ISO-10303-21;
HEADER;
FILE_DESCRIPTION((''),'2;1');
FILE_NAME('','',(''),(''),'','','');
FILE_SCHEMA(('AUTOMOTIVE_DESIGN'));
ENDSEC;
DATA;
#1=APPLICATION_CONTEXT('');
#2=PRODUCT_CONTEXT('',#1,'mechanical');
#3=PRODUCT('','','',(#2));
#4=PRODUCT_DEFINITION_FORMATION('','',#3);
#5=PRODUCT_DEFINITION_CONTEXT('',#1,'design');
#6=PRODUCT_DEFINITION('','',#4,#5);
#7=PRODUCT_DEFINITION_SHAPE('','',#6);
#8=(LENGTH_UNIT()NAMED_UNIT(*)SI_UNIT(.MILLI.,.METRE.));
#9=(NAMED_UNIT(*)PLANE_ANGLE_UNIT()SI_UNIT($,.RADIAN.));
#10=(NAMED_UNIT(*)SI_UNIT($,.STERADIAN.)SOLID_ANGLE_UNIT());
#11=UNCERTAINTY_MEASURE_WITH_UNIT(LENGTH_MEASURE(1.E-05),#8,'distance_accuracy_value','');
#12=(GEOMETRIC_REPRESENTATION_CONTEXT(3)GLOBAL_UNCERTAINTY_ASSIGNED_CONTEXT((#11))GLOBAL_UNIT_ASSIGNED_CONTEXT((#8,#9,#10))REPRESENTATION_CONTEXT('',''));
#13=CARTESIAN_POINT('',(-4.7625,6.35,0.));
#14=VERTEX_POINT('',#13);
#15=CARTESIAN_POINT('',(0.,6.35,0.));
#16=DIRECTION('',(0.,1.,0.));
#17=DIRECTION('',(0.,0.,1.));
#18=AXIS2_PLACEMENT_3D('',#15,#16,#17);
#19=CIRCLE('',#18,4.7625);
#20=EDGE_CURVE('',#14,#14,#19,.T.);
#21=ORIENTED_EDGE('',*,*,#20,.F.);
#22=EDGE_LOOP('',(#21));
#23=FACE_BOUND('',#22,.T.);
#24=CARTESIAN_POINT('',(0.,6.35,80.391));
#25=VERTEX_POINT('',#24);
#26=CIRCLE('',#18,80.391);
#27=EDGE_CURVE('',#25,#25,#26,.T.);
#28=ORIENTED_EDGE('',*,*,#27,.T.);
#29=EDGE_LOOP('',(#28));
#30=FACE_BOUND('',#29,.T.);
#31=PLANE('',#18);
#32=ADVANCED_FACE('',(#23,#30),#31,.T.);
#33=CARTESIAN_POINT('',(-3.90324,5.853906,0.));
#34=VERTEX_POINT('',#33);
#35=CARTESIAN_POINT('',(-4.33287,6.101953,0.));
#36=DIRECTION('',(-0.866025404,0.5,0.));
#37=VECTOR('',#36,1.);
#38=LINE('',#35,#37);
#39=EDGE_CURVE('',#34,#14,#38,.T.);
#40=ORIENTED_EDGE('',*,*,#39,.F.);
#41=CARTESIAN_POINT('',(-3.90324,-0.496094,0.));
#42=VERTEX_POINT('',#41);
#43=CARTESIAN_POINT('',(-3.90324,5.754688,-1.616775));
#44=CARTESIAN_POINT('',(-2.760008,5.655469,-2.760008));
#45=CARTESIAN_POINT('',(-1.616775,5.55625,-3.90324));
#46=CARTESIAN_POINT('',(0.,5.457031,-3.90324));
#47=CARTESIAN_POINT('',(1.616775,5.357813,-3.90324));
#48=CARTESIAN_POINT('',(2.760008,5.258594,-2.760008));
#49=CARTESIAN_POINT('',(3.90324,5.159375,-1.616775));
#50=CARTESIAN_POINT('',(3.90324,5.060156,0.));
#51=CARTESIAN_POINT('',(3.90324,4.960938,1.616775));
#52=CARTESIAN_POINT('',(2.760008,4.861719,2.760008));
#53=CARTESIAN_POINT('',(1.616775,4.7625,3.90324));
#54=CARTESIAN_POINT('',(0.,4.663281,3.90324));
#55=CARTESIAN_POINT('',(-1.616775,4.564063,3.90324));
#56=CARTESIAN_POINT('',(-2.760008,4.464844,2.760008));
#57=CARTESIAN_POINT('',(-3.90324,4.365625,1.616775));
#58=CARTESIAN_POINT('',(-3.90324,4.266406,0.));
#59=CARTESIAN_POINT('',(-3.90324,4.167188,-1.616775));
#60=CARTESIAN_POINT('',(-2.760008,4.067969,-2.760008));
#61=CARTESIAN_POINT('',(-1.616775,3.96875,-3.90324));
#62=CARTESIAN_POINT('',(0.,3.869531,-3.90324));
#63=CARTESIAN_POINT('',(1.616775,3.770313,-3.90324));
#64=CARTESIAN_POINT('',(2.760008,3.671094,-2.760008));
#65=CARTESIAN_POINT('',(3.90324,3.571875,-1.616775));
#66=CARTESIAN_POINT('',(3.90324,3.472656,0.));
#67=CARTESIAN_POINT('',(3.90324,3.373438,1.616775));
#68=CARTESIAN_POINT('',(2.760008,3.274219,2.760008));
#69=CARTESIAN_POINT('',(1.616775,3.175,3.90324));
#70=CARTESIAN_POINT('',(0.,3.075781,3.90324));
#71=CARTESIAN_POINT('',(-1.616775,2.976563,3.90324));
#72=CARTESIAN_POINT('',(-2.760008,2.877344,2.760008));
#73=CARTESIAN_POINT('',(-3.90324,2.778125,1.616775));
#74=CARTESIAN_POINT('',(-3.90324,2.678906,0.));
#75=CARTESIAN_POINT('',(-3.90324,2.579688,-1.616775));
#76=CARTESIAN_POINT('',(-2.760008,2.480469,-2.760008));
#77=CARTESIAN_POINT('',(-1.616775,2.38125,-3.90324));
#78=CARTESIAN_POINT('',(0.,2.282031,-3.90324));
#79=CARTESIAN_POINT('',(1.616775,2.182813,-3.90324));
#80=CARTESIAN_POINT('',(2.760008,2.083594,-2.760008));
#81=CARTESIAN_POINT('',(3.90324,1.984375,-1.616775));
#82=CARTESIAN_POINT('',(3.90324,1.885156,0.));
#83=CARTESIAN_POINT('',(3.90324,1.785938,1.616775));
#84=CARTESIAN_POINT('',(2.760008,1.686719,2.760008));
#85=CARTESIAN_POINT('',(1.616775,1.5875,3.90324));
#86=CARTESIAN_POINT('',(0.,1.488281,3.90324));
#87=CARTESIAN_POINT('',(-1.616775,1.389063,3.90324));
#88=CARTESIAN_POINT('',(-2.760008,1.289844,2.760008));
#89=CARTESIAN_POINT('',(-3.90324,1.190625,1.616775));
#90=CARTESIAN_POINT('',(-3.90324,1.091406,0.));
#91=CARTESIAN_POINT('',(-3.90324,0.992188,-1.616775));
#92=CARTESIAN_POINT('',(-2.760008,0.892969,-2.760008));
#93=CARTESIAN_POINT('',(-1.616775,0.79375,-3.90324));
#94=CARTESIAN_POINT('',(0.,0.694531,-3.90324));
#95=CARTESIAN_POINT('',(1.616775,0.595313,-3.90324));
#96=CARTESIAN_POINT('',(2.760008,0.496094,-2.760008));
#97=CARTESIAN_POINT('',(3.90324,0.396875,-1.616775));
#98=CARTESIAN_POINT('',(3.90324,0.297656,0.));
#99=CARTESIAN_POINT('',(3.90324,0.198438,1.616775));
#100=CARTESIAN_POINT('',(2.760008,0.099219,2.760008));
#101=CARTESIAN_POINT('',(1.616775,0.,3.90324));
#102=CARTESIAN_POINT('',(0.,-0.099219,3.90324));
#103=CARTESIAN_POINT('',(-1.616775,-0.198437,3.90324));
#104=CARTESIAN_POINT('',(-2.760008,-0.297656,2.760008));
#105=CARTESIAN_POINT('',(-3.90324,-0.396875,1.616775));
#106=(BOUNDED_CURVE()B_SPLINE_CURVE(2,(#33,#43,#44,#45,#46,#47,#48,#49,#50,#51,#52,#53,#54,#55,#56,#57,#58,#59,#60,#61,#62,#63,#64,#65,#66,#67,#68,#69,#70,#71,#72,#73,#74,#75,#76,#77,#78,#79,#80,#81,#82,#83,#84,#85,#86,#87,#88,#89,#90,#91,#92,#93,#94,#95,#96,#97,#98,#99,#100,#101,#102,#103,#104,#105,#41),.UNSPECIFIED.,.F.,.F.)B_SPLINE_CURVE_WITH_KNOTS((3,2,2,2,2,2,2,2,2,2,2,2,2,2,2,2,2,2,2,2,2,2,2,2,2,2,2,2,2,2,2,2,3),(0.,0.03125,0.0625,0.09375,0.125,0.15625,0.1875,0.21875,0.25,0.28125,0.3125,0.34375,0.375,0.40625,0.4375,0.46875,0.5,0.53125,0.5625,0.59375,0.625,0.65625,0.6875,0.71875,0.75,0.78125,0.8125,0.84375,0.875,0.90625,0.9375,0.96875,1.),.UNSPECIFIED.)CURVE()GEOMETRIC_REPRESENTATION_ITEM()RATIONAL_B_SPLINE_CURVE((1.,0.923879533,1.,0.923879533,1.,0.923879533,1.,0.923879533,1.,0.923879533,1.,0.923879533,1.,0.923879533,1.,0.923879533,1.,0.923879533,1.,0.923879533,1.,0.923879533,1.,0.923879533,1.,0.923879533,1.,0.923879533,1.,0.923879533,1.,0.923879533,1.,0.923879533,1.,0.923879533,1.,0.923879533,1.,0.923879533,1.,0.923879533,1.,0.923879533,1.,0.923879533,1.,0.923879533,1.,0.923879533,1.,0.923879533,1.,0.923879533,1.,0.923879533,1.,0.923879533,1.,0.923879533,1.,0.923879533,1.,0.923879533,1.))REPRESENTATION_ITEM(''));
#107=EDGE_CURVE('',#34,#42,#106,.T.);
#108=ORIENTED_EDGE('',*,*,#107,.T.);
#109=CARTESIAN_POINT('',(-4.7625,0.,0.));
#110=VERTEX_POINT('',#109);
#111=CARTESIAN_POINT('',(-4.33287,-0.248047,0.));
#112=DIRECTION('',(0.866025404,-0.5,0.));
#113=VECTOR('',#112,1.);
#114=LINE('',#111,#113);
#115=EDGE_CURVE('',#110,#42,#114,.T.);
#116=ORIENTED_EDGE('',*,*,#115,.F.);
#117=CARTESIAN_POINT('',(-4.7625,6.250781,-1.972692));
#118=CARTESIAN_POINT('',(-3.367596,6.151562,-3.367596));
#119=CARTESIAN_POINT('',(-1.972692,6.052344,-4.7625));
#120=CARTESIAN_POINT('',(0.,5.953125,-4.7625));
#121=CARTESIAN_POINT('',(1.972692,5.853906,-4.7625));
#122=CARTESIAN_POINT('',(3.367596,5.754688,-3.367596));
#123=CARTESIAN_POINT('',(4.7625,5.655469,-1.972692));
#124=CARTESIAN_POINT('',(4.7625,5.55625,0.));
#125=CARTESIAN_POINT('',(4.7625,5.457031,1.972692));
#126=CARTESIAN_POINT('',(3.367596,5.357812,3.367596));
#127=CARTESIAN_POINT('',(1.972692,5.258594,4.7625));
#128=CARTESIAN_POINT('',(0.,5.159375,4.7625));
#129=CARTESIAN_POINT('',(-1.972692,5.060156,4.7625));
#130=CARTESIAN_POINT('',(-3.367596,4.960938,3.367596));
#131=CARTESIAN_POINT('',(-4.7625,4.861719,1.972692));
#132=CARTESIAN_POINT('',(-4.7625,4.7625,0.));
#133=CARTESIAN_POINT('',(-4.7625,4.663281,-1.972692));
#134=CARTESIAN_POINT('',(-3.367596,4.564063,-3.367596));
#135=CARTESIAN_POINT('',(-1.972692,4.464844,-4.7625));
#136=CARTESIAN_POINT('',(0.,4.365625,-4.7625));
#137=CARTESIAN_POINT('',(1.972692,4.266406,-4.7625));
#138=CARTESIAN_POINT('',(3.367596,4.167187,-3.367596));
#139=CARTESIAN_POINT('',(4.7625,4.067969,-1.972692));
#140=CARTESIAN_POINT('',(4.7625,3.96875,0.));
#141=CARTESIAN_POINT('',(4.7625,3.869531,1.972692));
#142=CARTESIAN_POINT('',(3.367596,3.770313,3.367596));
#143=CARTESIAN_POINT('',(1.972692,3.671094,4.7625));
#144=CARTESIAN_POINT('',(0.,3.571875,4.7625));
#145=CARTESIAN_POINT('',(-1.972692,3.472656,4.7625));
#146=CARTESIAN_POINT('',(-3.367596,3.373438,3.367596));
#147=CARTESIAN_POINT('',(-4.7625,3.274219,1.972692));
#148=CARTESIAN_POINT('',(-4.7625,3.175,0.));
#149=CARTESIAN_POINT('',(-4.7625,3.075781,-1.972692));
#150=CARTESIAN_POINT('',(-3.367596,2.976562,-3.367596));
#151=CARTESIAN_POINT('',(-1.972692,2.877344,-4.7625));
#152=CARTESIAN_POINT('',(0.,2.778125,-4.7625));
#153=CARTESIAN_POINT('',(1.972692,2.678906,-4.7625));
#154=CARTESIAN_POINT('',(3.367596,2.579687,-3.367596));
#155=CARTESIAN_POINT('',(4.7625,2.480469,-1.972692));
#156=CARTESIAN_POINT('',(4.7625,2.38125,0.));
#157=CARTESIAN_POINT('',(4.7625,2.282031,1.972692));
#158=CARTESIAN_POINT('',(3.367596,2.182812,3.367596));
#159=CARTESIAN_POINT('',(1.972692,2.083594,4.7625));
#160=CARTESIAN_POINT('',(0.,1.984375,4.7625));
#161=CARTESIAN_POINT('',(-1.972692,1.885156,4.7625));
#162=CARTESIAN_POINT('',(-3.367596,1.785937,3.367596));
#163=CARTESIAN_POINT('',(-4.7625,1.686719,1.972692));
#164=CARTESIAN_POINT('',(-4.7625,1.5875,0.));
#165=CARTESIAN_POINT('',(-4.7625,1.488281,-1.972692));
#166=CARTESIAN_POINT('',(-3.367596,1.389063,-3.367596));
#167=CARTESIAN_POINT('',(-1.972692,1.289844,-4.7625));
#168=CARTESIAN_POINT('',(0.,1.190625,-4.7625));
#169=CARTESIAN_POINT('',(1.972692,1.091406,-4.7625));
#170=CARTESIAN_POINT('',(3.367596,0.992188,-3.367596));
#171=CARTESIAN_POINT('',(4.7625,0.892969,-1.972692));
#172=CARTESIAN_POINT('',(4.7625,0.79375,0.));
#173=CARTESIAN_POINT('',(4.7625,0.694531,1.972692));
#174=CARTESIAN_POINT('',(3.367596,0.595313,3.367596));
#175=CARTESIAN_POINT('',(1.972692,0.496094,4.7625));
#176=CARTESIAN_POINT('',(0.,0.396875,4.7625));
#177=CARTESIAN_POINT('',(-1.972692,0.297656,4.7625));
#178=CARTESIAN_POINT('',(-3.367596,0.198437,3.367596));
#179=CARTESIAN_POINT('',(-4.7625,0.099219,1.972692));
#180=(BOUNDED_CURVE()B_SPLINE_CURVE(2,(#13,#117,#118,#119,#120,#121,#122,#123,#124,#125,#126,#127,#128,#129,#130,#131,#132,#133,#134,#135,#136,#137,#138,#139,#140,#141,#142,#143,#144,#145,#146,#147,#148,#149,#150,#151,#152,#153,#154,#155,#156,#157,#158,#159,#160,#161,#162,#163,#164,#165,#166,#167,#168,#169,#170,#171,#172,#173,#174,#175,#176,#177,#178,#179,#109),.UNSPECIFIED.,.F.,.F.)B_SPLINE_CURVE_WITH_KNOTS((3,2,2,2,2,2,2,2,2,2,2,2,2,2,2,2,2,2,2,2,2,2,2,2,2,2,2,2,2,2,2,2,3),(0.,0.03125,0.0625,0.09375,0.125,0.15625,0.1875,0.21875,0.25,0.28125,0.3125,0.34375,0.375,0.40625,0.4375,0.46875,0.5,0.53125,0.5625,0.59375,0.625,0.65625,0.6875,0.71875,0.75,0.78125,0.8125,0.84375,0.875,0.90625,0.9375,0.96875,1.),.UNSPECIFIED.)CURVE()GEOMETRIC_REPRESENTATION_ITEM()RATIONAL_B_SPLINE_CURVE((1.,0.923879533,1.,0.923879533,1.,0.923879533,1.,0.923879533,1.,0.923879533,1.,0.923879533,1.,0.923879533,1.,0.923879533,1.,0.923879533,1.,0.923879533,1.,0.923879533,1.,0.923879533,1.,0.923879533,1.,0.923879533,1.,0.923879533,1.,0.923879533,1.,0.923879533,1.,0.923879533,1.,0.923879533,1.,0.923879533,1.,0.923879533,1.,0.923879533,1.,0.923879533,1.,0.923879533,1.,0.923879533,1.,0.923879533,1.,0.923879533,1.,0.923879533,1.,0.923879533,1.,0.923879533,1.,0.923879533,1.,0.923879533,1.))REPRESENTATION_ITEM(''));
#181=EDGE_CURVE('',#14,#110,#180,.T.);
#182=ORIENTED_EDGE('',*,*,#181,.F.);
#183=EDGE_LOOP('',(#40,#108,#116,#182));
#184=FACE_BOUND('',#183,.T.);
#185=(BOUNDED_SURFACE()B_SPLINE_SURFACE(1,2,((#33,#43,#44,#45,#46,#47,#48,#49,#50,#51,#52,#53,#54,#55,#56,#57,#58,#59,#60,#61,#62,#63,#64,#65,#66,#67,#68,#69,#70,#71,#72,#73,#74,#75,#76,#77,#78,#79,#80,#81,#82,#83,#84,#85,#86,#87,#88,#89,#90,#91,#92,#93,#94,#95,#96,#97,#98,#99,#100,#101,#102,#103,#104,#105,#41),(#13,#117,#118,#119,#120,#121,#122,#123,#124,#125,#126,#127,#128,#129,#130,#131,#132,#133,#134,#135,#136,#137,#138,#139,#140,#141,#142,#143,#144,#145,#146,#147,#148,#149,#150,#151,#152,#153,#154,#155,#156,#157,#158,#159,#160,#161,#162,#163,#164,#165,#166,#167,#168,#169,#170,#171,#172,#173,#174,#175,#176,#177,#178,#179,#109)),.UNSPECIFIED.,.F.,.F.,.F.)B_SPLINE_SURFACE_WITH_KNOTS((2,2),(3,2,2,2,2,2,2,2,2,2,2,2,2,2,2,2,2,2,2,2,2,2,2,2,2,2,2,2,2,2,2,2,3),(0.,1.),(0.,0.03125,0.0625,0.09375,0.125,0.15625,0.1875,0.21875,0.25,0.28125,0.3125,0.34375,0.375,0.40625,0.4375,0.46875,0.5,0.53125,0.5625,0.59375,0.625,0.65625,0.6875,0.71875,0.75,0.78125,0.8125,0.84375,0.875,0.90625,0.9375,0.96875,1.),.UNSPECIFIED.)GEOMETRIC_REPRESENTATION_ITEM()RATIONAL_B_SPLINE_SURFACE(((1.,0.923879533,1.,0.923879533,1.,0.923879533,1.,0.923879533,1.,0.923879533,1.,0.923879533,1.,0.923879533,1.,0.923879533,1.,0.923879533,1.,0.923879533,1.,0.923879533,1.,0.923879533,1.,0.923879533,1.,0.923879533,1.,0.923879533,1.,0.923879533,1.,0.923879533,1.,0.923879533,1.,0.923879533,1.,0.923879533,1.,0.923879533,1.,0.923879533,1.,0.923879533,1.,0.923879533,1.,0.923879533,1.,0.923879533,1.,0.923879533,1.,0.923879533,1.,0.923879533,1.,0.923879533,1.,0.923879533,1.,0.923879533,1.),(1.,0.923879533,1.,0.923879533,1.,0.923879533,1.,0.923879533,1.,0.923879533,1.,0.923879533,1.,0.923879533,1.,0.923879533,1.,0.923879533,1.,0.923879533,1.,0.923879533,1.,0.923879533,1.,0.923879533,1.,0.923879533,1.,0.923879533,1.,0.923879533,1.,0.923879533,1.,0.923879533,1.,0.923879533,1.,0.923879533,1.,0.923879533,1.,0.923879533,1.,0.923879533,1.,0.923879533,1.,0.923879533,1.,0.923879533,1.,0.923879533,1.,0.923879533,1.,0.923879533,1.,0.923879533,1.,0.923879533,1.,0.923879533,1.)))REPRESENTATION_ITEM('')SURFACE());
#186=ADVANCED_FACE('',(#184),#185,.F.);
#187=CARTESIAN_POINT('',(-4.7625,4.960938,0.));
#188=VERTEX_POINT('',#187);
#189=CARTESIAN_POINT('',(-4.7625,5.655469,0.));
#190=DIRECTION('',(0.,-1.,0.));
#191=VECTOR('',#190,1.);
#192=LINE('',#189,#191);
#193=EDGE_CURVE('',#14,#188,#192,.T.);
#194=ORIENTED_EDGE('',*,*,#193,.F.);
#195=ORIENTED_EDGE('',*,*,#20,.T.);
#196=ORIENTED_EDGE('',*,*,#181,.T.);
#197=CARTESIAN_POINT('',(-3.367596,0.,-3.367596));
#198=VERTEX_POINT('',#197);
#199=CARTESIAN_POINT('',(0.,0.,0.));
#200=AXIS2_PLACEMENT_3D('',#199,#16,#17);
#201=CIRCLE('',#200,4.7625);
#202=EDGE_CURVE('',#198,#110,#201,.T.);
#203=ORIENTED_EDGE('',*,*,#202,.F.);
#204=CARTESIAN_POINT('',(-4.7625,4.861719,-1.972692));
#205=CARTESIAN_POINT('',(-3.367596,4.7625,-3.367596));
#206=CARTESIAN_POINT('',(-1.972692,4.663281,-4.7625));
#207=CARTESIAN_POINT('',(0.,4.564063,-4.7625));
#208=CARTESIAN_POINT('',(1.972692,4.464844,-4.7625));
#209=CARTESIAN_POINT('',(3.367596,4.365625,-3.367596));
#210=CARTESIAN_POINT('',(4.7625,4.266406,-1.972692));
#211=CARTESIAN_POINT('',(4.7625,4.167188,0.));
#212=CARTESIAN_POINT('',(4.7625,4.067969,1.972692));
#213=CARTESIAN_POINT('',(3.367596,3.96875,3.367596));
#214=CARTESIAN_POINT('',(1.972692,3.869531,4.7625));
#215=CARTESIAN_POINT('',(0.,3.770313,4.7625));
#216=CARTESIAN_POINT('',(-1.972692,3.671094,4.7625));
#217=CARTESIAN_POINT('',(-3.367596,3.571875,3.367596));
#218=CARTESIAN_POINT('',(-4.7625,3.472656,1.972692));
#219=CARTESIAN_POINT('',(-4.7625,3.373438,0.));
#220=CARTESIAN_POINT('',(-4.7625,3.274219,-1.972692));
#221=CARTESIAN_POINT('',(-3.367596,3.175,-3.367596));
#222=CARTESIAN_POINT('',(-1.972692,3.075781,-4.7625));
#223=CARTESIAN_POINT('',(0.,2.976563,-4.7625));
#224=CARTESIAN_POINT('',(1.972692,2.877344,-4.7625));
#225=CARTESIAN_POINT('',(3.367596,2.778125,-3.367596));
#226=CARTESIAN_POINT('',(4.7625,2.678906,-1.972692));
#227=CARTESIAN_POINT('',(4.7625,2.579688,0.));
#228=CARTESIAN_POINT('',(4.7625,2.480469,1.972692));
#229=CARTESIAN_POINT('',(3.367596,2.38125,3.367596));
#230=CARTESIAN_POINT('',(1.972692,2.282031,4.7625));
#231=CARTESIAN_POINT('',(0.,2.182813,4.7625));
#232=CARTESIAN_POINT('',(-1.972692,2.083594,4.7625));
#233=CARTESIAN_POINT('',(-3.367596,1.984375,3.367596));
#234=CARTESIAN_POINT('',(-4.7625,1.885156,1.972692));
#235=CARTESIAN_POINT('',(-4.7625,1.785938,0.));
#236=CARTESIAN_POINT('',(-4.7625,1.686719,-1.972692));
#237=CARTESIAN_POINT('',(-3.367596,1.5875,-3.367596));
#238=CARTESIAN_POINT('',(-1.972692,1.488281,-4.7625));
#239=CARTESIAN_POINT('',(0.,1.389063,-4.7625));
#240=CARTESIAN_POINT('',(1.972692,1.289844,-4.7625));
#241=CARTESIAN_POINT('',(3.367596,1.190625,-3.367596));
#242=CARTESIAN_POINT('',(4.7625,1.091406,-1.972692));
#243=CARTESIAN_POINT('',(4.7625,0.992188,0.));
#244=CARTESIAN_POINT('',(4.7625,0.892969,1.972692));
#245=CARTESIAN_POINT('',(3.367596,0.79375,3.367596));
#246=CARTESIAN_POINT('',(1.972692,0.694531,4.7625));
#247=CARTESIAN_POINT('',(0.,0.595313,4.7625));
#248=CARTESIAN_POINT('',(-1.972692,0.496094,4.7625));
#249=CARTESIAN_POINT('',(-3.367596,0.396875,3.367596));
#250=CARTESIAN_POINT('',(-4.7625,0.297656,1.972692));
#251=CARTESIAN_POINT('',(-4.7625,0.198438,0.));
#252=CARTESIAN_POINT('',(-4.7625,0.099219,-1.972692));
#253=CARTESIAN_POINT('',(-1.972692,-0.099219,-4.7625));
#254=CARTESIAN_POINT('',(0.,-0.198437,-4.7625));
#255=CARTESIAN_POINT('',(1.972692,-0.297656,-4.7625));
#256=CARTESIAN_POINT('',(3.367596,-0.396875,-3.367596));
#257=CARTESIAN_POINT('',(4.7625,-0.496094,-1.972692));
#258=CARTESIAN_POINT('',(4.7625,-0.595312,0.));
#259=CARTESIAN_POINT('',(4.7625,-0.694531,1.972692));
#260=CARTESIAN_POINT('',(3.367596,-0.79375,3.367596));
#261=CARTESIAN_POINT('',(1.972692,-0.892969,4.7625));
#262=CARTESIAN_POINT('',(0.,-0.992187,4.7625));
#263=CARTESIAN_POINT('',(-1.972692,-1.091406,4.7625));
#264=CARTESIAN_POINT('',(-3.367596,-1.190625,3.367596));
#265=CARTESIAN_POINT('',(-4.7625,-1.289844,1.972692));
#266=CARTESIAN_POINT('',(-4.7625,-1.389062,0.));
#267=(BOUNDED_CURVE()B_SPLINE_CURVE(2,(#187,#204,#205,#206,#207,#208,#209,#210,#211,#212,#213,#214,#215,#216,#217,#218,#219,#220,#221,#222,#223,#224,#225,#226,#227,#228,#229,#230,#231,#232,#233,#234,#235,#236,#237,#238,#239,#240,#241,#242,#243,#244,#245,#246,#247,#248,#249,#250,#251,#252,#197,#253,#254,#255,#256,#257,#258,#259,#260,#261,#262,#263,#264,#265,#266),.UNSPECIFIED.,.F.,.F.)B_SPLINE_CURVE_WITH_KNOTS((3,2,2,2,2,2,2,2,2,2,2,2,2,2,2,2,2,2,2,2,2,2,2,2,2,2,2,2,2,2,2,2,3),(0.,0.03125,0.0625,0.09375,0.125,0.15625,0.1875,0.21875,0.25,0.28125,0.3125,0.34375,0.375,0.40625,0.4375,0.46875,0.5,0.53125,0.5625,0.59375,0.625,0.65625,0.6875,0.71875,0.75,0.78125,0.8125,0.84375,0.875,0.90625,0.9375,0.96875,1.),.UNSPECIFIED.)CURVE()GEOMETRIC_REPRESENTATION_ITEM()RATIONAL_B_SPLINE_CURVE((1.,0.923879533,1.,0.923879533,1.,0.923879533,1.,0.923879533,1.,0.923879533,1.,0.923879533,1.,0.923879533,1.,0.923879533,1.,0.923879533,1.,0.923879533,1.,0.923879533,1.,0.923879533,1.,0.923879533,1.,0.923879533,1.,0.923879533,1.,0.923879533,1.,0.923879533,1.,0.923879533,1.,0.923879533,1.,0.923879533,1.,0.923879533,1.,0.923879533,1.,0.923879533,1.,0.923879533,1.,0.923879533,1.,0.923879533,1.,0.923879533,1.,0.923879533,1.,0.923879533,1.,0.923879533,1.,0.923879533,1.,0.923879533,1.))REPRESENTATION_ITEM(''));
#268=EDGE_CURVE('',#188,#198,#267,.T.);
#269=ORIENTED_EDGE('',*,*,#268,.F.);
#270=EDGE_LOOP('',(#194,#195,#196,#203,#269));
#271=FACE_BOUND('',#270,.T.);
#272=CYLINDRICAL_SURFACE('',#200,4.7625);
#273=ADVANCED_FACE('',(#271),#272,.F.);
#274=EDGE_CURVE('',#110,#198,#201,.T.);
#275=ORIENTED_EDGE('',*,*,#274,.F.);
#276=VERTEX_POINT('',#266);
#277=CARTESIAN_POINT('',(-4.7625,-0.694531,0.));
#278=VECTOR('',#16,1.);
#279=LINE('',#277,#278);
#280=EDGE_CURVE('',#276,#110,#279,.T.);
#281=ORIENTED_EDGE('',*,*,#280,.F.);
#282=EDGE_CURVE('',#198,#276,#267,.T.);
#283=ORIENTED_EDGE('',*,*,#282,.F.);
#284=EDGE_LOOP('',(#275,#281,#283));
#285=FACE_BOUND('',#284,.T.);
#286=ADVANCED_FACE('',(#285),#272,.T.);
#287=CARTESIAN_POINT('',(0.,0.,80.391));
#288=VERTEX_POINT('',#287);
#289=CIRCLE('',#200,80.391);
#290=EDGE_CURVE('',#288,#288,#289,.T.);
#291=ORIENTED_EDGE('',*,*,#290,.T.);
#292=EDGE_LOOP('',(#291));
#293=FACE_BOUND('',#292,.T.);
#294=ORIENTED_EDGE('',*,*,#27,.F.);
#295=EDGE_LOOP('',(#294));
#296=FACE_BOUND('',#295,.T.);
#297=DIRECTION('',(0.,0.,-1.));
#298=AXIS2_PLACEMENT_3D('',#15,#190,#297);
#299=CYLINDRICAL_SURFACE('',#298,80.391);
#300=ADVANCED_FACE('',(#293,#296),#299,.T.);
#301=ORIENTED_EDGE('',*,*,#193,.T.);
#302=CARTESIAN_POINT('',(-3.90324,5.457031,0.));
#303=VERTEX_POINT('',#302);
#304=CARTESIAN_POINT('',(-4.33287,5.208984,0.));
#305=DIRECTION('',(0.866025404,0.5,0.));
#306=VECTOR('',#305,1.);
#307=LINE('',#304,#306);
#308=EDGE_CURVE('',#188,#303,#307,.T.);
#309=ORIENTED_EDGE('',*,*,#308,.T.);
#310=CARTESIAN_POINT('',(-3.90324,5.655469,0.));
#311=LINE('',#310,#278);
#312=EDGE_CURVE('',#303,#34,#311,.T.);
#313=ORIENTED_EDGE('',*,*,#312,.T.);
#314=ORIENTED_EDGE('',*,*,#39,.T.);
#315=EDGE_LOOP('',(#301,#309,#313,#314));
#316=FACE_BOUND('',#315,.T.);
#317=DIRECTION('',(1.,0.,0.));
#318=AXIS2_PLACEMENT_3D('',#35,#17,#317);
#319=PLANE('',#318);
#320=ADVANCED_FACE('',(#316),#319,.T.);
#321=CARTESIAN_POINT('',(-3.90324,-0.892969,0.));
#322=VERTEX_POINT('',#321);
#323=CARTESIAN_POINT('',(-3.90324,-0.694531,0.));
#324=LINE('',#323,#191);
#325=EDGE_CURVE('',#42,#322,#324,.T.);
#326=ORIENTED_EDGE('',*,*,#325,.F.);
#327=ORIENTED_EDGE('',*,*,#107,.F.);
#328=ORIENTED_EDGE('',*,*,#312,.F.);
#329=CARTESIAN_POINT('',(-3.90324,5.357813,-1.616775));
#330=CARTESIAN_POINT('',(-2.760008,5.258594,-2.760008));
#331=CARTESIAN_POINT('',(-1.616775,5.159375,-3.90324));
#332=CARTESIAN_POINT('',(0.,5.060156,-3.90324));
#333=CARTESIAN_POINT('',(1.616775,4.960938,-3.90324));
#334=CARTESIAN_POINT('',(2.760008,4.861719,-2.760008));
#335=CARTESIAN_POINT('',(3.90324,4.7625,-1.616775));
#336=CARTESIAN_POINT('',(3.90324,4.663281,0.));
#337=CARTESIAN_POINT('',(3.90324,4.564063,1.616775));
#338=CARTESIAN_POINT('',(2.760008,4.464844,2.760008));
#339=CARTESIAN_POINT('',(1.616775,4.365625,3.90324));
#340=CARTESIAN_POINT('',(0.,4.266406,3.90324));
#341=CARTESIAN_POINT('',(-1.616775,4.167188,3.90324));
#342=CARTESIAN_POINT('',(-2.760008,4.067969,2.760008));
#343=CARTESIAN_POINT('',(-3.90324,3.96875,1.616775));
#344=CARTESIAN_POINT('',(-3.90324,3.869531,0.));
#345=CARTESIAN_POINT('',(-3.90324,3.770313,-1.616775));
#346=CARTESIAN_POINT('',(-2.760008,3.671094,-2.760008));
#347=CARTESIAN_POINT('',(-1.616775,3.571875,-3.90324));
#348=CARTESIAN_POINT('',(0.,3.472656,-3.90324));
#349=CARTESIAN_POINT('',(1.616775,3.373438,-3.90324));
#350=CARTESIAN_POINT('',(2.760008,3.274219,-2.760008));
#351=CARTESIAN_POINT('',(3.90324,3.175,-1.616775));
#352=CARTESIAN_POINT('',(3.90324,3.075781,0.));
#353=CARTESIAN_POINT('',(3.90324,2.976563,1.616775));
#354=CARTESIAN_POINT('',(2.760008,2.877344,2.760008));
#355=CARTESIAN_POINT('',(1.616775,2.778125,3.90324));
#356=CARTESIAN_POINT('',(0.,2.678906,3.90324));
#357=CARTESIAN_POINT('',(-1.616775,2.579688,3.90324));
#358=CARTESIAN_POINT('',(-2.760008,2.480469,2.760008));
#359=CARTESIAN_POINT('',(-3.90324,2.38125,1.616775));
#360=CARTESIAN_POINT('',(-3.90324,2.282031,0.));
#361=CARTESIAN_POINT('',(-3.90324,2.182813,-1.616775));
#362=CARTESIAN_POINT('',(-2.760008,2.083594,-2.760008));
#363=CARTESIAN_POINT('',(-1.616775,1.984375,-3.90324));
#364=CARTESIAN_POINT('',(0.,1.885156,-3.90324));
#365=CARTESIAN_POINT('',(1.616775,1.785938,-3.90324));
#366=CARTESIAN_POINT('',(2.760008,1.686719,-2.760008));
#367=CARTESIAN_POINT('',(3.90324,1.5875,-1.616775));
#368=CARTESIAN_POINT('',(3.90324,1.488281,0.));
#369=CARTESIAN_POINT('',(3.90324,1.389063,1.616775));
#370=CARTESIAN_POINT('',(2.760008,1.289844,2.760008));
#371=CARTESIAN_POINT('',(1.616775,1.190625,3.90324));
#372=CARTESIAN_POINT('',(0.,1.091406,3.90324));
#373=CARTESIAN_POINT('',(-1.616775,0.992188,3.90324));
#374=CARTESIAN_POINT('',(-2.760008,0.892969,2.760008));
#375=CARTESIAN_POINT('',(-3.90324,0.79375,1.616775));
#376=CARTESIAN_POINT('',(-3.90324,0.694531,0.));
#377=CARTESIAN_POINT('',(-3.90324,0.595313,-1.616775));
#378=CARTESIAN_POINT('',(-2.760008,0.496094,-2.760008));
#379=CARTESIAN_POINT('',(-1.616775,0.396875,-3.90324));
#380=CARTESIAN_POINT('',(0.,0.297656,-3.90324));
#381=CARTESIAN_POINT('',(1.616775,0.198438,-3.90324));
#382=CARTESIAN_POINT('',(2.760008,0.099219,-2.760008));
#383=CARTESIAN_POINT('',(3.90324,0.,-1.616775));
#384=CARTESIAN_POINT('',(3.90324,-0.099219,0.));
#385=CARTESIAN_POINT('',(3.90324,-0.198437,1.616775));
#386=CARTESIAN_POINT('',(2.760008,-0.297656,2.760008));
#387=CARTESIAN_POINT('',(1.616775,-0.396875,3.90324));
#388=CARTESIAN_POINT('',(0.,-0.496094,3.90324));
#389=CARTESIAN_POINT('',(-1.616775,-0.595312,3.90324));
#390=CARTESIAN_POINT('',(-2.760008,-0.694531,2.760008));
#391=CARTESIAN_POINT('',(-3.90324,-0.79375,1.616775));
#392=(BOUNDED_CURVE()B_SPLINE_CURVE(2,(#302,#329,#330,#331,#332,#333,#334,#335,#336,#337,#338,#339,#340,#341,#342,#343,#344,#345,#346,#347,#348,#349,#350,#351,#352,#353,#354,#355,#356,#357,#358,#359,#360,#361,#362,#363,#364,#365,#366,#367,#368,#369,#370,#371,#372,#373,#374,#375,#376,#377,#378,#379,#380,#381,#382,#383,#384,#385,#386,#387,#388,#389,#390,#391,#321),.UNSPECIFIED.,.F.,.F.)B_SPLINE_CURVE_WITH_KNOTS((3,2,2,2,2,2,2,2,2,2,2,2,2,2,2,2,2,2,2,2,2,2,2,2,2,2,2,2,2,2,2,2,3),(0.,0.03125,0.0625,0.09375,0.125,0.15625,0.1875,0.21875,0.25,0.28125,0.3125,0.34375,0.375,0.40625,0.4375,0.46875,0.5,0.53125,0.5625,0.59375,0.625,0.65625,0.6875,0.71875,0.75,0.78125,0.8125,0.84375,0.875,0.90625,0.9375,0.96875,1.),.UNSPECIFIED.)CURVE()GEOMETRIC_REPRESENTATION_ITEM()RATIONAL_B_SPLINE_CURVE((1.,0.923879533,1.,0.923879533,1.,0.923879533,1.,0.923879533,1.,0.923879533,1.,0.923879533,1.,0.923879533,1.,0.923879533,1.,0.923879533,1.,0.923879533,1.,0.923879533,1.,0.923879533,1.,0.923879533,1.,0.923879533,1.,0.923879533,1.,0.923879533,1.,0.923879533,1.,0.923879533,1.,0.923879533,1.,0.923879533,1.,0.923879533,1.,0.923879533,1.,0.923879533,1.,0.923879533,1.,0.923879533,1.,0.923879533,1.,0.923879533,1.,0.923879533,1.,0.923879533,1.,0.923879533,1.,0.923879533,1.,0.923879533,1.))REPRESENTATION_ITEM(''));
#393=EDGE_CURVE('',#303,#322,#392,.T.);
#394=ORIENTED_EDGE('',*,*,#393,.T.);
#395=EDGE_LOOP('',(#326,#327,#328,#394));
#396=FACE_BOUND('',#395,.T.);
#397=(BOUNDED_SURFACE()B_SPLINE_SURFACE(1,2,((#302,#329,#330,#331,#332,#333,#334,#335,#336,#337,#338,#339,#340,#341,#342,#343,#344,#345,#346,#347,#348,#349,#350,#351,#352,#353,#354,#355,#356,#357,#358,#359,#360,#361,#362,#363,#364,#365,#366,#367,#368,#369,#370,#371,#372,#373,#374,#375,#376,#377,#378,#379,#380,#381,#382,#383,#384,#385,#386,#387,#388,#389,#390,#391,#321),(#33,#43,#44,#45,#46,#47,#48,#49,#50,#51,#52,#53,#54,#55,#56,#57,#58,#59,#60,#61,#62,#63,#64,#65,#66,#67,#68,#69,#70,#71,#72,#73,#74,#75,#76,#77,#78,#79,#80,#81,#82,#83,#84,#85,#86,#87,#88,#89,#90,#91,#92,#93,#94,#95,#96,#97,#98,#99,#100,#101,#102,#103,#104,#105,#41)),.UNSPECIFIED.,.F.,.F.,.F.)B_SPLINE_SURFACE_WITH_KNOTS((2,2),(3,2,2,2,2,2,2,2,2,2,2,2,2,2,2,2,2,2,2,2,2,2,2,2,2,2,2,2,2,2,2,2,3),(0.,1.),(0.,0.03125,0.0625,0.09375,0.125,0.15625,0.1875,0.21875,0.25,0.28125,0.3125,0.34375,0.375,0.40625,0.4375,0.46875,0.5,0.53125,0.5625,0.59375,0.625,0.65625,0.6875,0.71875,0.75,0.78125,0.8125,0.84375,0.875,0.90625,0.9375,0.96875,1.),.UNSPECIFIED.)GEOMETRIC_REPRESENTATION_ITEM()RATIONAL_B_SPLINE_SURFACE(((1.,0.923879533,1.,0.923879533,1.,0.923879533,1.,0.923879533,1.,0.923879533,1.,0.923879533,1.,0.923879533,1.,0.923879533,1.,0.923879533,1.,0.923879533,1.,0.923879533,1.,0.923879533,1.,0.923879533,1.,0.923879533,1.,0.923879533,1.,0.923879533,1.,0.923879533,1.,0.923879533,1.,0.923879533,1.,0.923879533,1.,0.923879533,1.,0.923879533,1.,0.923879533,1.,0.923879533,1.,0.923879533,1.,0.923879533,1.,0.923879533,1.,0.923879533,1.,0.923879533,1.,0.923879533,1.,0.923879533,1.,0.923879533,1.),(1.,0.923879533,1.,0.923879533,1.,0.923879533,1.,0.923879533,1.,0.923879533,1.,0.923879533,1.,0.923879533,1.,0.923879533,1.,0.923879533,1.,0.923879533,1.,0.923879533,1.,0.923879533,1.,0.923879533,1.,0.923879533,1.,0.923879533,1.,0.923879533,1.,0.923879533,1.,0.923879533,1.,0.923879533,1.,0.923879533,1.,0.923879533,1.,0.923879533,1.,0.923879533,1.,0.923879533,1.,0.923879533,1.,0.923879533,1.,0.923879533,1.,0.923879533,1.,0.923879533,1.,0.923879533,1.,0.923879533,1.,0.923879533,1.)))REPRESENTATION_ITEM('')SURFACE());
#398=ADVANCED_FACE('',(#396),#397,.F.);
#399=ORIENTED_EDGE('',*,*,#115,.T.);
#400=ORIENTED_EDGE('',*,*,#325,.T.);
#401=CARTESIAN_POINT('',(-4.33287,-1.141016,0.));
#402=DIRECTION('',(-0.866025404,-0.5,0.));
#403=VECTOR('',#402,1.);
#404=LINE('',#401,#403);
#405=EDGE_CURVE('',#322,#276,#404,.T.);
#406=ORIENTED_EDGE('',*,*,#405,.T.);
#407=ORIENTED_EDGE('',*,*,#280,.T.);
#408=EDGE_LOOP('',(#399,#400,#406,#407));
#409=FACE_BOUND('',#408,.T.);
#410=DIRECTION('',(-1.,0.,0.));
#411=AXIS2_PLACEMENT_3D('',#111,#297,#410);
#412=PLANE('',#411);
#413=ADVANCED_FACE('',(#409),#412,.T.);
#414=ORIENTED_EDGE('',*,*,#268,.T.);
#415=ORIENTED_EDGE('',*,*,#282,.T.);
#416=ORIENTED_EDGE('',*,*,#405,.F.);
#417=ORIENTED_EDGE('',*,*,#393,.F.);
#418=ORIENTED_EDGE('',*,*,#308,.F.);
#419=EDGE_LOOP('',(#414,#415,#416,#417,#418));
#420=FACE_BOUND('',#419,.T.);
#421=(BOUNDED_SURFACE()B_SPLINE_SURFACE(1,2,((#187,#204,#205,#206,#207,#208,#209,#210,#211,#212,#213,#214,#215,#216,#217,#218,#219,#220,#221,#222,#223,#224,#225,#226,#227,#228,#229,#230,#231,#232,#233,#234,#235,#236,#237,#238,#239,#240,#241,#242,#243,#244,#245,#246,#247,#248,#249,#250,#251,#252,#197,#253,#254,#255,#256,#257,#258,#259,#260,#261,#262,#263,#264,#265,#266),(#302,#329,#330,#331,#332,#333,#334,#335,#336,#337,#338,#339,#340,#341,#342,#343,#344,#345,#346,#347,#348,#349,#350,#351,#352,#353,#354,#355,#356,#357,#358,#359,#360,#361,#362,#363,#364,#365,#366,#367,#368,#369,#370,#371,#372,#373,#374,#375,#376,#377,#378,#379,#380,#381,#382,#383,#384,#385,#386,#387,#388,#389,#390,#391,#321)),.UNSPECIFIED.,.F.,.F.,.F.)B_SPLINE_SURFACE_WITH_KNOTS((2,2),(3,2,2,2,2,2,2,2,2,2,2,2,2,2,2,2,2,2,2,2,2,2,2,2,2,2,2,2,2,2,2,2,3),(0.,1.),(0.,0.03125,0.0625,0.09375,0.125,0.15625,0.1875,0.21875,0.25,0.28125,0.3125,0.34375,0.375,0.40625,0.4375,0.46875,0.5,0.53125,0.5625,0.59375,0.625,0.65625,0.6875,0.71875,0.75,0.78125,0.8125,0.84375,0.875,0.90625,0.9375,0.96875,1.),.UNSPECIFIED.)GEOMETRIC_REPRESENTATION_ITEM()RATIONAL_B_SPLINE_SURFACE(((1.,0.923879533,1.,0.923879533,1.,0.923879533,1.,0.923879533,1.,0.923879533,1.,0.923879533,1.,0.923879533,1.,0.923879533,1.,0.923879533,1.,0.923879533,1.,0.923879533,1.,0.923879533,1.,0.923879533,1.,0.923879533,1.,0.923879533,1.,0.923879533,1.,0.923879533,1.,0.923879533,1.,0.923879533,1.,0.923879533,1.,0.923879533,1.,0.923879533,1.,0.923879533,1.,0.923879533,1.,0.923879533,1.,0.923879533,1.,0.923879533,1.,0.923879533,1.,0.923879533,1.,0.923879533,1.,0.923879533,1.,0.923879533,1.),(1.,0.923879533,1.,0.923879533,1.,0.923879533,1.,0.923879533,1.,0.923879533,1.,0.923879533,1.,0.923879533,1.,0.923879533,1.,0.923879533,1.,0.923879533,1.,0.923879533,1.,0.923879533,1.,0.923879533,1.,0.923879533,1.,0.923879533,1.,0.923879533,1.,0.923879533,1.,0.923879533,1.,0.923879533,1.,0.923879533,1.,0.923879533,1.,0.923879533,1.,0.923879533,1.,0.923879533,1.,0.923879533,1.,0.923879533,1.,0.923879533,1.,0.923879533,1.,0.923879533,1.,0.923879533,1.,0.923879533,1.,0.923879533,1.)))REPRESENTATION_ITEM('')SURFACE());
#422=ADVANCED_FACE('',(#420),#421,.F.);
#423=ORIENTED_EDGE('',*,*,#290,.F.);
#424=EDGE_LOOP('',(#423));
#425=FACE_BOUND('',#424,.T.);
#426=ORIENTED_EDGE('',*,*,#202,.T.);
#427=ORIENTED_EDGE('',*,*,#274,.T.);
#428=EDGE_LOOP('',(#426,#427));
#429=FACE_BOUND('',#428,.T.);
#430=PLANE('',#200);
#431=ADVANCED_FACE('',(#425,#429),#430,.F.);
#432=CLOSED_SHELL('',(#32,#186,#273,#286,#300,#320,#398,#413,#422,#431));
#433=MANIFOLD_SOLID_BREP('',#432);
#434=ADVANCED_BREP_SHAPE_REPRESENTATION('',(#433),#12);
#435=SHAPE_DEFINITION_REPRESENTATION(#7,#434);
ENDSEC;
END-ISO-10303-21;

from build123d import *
from build123d.topology import SkipClean

# Parameters (mm, degrees)
SKETCH1_R           = 80.391
BOSS_EXTRUDE1_DEPTH = 6.35
SKETCH3_R           = 4.7625
CUT_EXTRUDE2_DEPTH  = 114.867239635
THREAD1_PITCH       = 1.5875


with BuildPart() as part:
    # Sketch1 → Boss-Extrude1 (new body)
    with BuildSketch(Plane(origin=(0, 0, 0), x_dir=(1, 0, 0), z_dir=(0, 1, 0))):
        with Locations(Location((0, 0, 0), (0, 0, 270))):
            Circle(SKETCH1_R)
    extrude(amount=BOSS_EXTRUDE1_DEPTH)

    # Sketch3 → Cut-Extrude2 (cut, through all)
    with BuildSketch(Plane(origin=(0, 6.35, 0), x_dir=(1, 0, 0), z_dir=(0, 1, 0))):
        with Locations(Location((0, 0, 0), (0, 0, 270))):
            Circle(SKETCH3_R)
    extrude(amount=-CUT_EXTRUDE2_DEPTH, mode=Mode.SUBTRACT)

    # Thread1: the profile of Thread Profile1 profile screwed along a right-hand helix of 4 turns, 8 arcs to a turn; built about Z, then put on its axis
    with SkipClean():  # the faces are left unmerged after this step: merging them gives an invalid solid
        thread1_z = Axis((0, 0, 0), (0, 0, 1))
        thread1_corners = [(4.7628, 0, -0.000173205), (4.7628, 0, 1.389235701), (3.903240423, 0, 0.892968748), (3.903240423, 0, 0.496093748)]
        with BuildLine(mode=Mode.PRIVATE) as thread1_profile:
            Line(thread1_corners[0], thread1_corners[1])
            Line(thread1_corners[1], thread1_corners[2])
            Line(thread1_corners[2], thread1_corners[3])
            Line(thread1_corners[3], thread1_corners[0])
        thread1_cap = Face(thread1_profile.wire())
        thread1_turn_angles = [0, 22.5, 45, 67.5, 90, 112.5, 135, 157.5, 180, 202.5, 225, 247.5, 270, 292.5, 315, 337.5, 360]
        thread1_turn_weights = [1, 0.9238795325112867, 1, 0.9238795325112867, 1, 0.9238795325112867, 1, 0.9238795325112867, 1, 0.9238795325112867, 1, 0.9238795325112867, 1, 0.9238795325112867, 1, 0.9238795325112867, 1]
        thread1_turn_rails = [Edge.make_bspline([Vector(p[0], p[1], 0).rotate(thread1_z, thread1_turn_angles[k]) / thread1_turn_weights[k] + Vector(0, 0, p[2] + THREAD1_PITCH * thread1_turn_angles[k] / 360) for k in range(17)], [0, 0, 0, 1, 1, 2, 2, 3, 3, 4, 4, 5, 5, 6, 6, 7, 7, 8, 8, 8], 2, thread1_turn_weights) for p in thread1_corners]
        thread1_turn_sides = [Face.make_surface_from_curves(thread1_turn_rails[p[0]], thread1_turn_rails[p[1]]) for p in [(0, 1), (1, 2), (2, 3), (3, 0)]]
        thread1 = Plane(origin=(0, 6.35, 0), x_dir=(-1, 0, 0), z_dir=(0, -1, 0)) * Solid(Shell([*[p.moved(Location((0, 0, THREAD1_PITCH * i))) for i in range(4) for p in thread1_turn_sides], thread1_cap, thread1_cap.rotate(thread1_z, 1440).moved(Location((0, 0, THREAD1_PITCH * 1440 / 360)))]))
        add(thread1)


solid = part.part
